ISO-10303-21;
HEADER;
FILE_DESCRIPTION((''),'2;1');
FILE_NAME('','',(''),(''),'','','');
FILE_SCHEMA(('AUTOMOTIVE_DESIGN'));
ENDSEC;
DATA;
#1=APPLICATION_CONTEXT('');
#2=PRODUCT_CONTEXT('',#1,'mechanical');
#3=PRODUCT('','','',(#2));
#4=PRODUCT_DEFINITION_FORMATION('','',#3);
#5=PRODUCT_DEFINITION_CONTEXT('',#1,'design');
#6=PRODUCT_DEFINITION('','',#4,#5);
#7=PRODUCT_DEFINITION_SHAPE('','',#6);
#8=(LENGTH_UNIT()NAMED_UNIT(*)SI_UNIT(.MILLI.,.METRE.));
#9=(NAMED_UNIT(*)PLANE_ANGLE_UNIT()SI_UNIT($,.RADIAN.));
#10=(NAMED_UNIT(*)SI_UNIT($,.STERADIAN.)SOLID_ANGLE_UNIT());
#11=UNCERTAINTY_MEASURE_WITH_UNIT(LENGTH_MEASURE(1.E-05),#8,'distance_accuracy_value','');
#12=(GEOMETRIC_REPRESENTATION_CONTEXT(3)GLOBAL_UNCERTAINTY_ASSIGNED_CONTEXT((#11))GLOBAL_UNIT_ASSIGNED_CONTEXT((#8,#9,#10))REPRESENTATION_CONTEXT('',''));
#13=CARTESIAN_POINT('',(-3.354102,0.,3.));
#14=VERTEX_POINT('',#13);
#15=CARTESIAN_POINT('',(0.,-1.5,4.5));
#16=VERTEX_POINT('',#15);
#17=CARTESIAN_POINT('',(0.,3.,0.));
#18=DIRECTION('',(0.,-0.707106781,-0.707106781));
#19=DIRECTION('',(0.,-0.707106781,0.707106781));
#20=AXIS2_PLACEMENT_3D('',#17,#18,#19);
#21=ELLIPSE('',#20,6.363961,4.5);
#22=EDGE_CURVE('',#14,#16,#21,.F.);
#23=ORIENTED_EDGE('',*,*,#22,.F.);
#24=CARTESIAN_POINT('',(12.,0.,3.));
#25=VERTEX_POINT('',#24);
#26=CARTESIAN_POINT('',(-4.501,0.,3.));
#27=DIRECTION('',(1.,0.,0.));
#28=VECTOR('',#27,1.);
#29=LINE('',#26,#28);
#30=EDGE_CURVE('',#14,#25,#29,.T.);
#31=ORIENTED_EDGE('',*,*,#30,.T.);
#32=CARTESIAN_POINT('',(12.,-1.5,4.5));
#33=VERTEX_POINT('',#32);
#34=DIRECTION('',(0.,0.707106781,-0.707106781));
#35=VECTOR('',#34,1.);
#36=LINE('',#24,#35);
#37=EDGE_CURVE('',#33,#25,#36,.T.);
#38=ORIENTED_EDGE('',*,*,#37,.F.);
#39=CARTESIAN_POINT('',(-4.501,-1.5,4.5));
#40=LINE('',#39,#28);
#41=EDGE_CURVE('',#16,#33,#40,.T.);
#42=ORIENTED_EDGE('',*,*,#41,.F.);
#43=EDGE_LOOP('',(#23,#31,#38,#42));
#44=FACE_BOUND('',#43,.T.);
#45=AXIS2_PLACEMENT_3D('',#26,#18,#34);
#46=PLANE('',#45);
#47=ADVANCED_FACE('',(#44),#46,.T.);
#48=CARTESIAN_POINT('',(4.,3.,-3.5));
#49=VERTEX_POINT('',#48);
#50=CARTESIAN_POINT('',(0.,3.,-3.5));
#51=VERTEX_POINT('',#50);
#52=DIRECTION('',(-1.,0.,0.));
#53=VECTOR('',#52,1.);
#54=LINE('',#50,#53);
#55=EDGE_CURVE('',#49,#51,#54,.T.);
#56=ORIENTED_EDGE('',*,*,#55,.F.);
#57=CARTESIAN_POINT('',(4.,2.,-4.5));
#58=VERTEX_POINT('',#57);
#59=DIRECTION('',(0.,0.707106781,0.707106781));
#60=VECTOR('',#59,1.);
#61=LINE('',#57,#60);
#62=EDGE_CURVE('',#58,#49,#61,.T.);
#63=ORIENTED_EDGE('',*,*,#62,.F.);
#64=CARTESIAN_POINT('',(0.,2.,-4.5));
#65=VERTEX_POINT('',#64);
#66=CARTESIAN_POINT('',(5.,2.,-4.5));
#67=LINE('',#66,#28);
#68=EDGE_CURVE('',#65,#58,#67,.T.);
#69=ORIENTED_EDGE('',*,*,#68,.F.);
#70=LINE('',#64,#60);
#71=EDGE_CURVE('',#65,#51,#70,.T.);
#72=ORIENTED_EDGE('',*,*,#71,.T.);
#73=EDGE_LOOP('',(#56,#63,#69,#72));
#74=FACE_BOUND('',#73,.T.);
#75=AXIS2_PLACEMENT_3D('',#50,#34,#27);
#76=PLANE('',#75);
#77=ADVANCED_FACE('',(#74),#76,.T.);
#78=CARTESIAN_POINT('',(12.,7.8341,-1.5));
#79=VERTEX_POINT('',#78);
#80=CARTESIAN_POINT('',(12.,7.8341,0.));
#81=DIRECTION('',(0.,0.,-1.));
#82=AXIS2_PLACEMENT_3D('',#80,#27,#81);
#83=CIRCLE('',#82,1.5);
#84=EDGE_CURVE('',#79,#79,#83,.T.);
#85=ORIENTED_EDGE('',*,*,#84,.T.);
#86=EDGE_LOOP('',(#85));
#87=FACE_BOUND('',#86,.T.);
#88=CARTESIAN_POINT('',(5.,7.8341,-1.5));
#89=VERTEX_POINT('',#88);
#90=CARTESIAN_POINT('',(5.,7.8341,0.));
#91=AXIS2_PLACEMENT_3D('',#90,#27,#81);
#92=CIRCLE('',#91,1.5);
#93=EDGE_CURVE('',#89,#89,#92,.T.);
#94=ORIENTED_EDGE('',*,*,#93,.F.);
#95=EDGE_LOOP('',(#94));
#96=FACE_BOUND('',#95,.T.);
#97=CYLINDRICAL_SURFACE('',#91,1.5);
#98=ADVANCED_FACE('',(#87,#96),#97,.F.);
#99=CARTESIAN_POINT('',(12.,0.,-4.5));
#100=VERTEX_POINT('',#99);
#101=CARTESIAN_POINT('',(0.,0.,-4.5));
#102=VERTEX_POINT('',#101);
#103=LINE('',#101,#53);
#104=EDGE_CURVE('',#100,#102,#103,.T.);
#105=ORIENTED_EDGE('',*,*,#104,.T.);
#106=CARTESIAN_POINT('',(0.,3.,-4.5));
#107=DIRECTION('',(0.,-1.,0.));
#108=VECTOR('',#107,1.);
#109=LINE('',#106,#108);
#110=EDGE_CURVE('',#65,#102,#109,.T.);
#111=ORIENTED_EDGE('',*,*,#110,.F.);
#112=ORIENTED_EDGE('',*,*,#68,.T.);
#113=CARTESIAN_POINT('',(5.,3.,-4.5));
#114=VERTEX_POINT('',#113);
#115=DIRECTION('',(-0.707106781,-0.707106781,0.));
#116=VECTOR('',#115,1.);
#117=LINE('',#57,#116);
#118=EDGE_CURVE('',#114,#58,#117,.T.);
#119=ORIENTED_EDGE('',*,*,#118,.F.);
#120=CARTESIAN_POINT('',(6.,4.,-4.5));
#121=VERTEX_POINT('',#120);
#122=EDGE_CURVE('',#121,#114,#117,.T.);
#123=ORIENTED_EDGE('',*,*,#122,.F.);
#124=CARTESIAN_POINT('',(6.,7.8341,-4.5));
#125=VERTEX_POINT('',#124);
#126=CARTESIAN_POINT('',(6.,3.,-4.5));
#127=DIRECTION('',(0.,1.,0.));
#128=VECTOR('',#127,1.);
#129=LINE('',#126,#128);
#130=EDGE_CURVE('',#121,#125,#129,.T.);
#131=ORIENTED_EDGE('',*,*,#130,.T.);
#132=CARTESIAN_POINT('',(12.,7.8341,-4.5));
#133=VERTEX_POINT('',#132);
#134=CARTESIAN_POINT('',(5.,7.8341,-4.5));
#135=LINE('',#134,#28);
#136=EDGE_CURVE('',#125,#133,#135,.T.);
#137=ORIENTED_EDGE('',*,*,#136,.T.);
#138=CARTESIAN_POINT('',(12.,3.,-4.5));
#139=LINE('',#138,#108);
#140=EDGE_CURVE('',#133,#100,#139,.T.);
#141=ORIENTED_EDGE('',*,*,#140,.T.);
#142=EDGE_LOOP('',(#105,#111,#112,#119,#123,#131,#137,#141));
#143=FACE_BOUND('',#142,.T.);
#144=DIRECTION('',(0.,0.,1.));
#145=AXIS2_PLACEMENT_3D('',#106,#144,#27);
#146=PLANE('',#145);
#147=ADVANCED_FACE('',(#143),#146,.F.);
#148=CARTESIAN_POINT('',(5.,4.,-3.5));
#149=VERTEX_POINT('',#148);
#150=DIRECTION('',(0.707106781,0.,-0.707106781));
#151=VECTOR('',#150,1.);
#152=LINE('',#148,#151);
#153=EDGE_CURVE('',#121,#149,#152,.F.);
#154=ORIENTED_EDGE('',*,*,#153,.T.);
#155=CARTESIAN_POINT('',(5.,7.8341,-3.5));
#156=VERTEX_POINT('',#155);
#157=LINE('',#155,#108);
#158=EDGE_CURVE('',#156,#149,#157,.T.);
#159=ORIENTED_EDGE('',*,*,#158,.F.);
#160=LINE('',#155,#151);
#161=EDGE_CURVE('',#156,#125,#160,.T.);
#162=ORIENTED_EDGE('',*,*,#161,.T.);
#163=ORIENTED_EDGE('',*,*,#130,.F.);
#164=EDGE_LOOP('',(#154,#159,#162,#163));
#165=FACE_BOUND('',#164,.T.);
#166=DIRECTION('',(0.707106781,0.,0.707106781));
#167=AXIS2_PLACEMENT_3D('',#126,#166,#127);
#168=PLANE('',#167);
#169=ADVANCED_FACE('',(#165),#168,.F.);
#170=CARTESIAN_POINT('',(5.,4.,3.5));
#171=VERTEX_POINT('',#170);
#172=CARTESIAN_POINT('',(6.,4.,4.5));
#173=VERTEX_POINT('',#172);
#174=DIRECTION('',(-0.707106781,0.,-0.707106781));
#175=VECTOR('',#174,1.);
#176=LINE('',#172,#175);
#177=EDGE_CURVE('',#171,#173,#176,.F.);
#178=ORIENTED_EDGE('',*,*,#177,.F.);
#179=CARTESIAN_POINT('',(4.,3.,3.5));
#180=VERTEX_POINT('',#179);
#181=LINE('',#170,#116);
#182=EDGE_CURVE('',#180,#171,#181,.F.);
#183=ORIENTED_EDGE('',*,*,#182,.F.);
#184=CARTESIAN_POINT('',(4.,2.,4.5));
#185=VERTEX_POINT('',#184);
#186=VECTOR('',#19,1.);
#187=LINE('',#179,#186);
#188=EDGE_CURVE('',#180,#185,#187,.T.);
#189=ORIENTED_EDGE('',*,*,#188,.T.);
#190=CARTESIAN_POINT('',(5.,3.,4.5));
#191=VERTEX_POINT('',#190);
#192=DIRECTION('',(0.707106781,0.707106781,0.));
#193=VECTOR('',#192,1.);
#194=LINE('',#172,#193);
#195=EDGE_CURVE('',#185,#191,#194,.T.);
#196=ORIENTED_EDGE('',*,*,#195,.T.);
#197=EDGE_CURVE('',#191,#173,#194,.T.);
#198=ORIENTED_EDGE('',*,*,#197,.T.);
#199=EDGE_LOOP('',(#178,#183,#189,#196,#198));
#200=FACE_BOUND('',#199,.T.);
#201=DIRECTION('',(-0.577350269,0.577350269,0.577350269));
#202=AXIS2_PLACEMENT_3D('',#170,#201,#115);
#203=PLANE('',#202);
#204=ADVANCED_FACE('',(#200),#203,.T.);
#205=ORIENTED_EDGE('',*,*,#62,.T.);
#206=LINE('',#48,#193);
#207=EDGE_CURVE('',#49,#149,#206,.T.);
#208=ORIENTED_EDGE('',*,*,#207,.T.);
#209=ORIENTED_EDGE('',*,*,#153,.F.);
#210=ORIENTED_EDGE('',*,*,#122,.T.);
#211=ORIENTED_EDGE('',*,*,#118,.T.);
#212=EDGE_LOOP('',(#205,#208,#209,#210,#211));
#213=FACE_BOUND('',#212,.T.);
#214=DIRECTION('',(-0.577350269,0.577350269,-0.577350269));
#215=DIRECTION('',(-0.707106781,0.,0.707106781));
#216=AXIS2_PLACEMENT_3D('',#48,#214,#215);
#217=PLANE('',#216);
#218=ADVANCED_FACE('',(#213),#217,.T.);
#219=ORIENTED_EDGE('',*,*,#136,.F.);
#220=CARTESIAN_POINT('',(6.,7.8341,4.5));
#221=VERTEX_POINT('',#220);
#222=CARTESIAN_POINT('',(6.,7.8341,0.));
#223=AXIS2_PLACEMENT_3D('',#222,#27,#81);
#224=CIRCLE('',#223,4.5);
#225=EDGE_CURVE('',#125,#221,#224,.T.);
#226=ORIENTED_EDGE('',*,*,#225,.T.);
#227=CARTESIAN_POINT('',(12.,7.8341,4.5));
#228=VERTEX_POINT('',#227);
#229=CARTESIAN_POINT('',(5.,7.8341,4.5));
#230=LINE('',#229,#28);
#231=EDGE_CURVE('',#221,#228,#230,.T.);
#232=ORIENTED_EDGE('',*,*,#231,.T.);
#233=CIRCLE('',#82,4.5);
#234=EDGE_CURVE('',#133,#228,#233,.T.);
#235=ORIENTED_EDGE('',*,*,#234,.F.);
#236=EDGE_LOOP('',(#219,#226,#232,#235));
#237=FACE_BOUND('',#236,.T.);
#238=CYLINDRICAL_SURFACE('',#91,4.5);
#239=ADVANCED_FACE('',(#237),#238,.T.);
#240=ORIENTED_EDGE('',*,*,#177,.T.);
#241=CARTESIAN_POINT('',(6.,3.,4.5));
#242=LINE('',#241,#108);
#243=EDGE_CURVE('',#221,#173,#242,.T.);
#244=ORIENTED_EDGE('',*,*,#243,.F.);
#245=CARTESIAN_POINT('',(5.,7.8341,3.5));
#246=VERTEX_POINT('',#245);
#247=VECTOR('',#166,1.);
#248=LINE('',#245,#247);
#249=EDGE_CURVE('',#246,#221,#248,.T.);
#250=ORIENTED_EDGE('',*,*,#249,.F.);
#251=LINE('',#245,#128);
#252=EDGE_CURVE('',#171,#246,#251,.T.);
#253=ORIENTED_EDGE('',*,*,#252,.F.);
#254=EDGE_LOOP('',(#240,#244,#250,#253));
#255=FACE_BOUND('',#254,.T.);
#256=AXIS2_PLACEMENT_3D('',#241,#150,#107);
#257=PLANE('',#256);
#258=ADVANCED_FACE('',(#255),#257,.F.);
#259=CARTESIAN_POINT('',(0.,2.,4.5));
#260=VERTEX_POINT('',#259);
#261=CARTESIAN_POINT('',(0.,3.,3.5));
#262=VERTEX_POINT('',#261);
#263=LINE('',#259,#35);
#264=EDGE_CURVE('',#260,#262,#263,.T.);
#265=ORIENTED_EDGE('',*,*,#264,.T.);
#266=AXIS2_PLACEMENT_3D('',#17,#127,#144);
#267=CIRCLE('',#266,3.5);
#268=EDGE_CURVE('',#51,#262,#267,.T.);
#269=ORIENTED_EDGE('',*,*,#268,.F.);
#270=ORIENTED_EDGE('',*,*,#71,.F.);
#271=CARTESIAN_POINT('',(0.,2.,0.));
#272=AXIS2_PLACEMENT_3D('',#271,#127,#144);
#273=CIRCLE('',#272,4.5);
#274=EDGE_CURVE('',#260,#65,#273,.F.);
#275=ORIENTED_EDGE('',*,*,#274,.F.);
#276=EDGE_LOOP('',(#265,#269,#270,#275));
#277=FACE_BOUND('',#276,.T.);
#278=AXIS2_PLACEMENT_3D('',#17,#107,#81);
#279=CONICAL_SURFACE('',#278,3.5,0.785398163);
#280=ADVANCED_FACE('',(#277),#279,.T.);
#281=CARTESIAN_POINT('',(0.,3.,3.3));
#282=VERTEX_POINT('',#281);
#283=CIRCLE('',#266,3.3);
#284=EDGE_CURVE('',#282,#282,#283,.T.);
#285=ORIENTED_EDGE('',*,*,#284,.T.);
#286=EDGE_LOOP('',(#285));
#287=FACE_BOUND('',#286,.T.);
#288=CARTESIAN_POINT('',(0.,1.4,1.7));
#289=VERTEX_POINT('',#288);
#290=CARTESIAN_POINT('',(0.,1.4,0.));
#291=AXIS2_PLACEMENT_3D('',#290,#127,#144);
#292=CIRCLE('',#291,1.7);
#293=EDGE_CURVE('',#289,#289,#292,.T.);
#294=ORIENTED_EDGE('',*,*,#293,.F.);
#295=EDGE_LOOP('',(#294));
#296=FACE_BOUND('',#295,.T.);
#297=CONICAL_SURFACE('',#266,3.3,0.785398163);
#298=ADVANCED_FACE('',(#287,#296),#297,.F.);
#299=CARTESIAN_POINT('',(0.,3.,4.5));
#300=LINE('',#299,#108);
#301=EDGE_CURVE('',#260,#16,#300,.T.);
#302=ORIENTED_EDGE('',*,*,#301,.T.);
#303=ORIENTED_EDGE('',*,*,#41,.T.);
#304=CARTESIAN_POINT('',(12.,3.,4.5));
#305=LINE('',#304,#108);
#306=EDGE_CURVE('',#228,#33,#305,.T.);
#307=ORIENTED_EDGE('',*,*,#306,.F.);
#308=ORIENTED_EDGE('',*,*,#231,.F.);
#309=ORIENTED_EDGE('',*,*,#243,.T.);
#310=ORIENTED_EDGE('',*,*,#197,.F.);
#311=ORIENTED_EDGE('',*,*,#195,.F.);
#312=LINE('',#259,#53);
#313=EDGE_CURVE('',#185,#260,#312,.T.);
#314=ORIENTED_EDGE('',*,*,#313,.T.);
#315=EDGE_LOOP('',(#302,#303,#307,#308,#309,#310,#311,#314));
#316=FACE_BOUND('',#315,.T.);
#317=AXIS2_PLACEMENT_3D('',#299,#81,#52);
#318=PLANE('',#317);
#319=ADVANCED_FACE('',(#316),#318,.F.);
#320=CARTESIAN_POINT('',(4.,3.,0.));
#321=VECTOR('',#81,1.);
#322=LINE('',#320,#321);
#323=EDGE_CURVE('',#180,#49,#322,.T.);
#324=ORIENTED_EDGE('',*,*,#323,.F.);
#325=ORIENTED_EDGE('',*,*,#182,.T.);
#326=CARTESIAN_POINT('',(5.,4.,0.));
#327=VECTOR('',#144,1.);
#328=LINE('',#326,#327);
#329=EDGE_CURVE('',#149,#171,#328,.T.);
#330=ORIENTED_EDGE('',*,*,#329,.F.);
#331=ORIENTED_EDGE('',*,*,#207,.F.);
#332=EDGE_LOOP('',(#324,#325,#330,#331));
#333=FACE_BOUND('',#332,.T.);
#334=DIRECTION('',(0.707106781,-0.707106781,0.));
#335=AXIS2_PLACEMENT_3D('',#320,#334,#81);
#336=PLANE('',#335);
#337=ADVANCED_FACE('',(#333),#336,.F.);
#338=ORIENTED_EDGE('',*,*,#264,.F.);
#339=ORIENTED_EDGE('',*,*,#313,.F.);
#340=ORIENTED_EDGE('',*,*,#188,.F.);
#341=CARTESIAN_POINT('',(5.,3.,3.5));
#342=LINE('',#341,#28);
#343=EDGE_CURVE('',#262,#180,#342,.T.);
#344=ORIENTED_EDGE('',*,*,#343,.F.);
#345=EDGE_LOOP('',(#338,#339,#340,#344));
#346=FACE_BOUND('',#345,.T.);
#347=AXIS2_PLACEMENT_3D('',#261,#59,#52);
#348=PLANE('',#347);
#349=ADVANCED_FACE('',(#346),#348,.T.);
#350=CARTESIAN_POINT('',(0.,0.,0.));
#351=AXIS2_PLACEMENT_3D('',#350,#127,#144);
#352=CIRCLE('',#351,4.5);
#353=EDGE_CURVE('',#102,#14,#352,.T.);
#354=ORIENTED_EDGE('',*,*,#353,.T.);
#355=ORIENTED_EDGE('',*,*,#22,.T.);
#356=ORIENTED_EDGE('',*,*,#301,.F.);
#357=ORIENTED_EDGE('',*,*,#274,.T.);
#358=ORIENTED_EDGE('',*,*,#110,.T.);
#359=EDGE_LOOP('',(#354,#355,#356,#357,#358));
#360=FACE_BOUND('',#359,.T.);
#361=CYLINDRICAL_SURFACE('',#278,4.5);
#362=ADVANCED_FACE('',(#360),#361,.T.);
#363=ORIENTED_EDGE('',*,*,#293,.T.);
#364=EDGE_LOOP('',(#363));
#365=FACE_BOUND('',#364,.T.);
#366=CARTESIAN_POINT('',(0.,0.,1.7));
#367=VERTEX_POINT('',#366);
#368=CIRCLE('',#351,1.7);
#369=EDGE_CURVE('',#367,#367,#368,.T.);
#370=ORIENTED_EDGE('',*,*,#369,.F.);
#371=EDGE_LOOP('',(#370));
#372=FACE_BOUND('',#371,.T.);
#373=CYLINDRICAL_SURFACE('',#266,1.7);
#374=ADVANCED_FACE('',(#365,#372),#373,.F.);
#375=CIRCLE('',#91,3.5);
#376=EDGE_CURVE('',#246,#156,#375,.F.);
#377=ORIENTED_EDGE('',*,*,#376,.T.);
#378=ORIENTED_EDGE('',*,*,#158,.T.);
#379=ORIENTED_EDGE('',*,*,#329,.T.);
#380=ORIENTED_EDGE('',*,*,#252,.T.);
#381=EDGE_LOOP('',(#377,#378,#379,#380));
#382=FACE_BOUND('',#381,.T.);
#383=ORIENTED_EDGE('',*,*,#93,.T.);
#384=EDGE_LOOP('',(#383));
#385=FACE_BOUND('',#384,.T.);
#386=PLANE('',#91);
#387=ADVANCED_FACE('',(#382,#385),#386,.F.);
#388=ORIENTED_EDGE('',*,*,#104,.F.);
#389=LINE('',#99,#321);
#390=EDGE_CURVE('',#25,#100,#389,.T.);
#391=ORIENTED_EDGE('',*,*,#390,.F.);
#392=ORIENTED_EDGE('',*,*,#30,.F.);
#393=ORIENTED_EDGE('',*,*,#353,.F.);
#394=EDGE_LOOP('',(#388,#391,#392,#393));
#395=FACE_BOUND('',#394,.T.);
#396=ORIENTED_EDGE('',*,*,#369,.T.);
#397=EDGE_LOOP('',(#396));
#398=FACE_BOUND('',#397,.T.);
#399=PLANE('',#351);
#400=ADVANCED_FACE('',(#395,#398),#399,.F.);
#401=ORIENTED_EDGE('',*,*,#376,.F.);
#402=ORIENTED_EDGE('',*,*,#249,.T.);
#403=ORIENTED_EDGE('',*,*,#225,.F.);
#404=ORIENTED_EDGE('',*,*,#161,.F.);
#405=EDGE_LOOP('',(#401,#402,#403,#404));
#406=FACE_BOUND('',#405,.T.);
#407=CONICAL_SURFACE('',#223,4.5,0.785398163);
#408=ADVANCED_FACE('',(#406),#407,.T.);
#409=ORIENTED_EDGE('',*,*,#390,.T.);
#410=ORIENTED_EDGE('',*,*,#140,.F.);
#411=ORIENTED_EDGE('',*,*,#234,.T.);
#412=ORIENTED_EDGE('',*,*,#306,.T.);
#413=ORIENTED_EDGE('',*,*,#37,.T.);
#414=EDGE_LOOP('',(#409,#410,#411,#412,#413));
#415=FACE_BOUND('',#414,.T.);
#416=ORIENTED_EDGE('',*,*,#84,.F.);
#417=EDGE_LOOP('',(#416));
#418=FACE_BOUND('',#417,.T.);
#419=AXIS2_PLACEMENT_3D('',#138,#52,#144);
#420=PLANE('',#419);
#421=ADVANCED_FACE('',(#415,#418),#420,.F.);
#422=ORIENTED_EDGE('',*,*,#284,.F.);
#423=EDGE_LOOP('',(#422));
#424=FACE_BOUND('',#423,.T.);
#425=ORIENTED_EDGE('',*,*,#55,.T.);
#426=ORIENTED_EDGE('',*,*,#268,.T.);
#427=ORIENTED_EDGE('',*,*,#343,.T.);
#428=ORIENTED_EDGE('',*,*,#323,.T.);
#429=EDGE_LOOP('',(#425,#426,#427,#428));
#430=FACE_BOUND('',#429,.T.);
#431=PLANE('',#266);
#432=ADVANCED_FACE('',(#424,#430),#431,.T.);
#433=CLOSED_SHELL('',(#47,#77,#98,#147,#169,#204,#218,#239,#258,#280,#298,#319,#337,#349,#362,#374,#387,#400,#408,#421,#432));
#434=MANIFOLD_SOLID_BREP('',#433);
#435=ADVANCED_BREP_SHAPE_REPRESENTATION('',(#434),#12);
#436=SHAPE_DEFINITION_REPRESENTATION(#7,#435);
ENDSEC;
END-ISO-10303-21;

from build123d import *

# Parameters (mm, degrees)
SKETCH_1_R                = 1.5
EXTRUDE_1_DEPTH           = 3
SKETCH_3_R                = 1.5
EXTRUDE_2_DEPTH           = 7
EXTRUDE_START             = -15.354101966
EXTRUDE_3_DEPTH           = 15.354101966
EXTRUDE_START_2           = -2
EXTRUDE_3_2_DEPTH         = 2
HOLE_WIZARD_1_D           = 3.4
HOLE_WIZARD_1_CSINK_D     = 6.6
HOLE_WIZARD_1_CSINK_ANGLE = 90
CHAMFER_1_SIZE            = 1


with BuildPart() as part:
    # 草图1 → 凸台-拉伸1 (new body)
    with BuildSketch(Plane(origin=(0, 0, 0), x_dir=(1, 0, 0), z_dir=(0, 1, 0))):
        with BuildLine():
            Line((0, 4.5), (12, 4.5))
            Line((12, 4.5), (12, -4.5))
            Line((12, -4.5), (0, -4.5))
            ThreePointArc((0, -4.5), (-4.5, 0), (0, 4.5))
        make_face()
        with Locations(Location((0, 0, 0), (0, 0, 270))):
            Circle(SKETCH_1_R, mode=Mode.SUBTRACT)
    extrude(amount=EXTRUDE_1_DEPTH)

    # 草图3 → 凸台-拉伸2 (add)
    with BuildSketch(Plane(origin=(12, 0, 0), x_dir=(0, 0, -1), z_dir=(1, 0, 0))):
        with BuildLine():
            Line((-4.5, 7.834100358), (-4.5, 0))
            Line((-4.5, 0), (4.5, 0))
            Line((4.5, 0), (4.5, 7.834100358))
            ThreePointArc((4.5, 7.834100358), (0, 12.334100358), (-4.5, 7.834100358))
        make_face()
        with Locations((0, 7.834100358)):
            Circle(SKETCH_3_R, mode=Mode.SUBTRACT)
    extrude(amount=-EXTRUDE_2_DEPTH)

    # 凸台-拉伸3: read off the stored shape, not the designer's step
    # 凸台-拉伸3 outline → 凸台-拉伸3 (add)
    with BuildSketch(Plane(origin=(12, 0, 0), x_dir=(0, 0, -1), z_dir=(1, 0, 0)).offset(EXTRUDE_START)):
        Polygon((-4.5, 0), (-4.5, -1.5), (-3, 0), align=None)
    extrude(amount=EXTRUDE_3_DEPTH)

    # Extrude 3 2 outline → Extrude 3 2 (cut)
    with BuildSketch(Plane(origin=(0, 0, 0), x_dir=(1, 0, 0), z_dir=(0, 1, 0)).offset(EXTRUDE_START_2)):
        with BuildLine():
            Line((-3.354101966, -4.5), (0, -4.5))
            ThreePointArc((0, -4.5), (-1.837117307, -4.107919181), (-3.354101966, -3))
            Line((-3.354101966, -3), (-3.354101966, -4.5))
        make_face()
    extrude(amount=EXTRUDE_3_2_DEPTH, mode=Mode.SUBTRACT)

    # 打孔尺寸(%根据十字)槽半沉头木螺钉的类型1 (through all)
    with Locations(Plane(origin=(0, 3, 0), x_dir=(1, 0, 0), z_dir=(0, 1, 0))):
        with Locations((0, 0)):
            CounterSinkHole(HOLE_WIZARD_1_D / 2, HOLE_WIZARD_1_CSINK_D / 2, counter_sink_angle=HOLE_WIZARD_1_CSINK_ANGLE)

    # 倒角1
    chamfer_1_edges = [part.edges().sort_by_distance(p)[0] for p in [
        (2.5, 3, -4.5),
        (5, 3, 0),
        (5, 12.334100358, 0),
        (5, 5.417050179, -4.5),
        (5, 5.417050179, 4.5),
        (-4.5, 3, 0),
        (2.5, 3, 4.5),
    ]]
    chamfer(chamfer_1_edges, length=CHAMFER_1_SIZE)


solid = part.part
